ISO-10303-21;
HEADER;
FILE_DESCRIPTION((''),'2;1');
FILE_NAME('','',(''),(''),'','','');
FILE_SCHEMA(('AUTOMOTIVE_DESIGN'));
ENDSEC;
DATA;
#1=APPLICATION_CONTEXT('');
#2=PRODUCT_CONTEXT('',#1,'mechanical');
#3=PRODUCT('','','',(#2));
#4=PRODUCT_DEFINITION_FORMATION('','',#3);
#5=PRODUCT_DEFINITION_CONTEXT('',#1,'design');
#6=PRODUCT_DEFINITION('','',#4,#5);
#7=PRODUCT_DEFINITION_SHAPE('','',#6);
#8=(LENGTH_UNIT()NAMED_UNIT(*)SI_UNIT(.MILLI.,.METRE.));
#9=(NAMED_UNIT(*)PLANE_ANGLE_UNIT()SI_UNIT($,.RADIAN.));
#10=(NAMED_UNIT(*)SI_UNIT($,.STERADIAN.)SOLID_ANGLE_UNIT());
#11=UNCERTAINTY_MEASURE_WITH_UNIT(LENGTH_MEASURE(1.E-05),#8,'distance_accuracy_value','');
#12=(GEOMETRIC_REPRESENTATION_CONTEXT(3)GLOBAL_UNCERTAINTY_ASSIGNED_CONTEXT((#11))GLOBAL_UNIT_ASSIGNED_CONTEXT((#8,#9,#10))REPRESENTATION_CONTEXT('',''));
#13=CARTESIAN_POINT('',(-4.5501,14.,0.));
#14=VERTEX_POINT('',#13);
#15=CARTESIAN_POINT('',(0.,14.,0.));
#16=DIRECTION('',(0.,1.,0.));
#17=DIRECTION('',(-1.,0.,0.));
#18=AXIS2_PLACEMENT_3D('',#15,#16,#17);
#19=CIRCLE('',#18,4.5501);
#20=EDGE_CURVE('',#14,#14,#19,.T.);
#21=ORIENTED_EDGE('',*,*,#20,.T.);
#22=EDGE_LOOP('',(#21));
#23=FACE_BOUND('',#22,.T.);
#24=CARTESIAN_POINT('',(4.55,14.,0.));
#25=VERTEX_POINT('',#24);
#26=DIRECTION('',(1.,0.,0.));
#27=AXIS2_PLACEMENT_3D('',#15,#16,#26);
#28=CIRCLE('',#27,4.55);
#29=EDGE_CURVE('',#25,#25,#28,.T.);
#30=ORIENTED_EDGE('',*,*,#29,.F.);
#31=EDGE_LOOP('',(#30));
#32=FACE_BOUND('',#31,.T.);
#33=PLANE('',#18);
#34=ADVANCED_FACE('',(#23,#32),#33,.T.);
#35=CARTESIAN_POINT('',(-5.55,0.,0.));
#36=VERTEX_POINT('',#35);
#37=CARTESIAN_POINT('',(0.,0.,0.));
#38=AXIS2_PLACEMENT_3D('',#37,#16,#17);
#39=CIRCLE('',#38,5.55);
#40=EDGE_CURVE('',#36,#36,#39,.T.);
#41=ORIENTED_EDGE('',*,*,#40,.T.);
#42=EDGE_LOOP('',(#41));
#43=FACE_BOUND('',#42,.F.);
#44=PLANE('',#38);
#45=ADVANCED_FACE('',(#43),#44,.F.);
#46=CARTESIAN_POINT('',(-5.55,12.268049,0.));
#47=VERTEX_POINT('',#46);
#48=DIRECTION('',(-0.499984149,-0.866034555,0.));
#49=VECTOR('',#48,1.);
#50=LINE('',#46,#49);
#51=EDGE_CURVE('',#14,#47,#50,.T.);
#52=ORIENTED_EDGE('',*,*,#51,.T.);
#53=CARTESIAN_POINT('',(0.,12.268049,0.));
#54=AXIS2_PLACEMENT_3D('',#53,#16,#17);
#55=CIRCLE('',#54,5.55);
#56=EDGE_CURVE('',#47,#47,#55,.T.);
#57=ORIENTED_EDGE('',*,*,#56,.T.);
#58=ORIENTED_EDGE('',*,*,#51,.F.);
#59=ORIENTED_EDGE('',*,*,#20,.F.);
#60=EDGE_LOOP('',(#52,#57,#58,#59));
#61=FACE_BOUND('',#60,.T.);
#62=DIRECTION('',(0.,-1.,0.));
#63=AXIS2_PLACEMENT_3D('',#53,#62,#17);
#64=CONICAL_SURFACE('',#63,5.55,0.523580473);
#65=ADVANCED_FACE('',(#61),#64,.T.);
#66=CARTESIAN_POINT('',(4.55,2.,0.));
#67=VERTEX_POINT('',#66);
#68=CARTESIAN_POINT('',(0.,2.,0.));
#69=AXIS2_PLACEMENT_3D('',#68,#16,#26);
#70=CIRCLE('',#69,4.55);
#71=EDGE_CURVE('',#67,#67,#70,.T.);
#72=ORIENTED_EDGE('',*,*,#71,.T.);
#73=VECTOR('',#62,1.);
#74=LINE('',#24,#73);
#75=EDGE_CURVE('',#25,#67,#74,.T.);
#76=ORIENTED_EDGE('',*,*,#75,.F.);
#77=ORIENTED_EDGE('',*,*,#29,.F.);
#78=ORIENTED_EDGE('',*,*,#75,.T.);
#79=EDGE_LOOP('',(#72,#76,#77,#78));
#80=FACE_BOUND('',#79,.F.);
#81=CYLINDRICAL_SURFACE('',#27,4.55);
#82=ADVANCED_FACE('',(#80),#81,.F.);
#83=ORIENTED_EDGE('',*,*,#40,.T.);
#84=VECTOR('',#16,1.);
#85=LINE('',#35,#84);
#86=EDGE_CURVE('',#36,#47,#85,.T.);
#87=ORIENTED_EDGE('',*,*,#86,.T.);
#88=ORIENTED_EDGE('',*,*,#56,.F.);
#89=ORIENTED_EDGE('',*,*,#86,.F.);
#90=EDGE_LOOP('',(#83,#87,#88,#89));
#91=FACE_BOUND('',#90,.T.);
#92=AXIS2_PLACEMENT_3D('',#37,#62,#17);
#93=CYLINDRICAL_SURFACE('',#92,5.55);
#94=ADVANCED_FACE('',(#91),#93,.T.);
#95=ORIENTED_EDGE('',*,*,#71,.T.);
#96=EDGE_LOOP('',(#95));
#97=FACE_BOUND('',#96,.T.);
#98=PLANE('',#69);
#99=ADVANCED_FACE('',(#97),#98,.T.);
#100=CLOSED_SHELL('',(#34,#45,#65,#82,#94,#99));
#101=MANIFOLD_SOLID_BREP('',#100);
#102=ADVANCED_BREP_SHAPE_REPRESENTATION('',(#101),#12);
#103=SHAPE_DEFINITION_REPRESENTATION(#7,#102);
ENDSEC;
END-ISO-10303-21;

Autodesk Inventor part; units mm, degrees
ref_plane "YZ Plane" through (0, 0, 0) normal (1, 0, 0) x (0, 1, 0)
ref_plane "XZ Plane" through (0, 0, 0) normal (0, 1, 0) x (-1, 0, 0)
ref_plane "XY Plane" through (0, 0, 0) normal (0, 0, 1) x (1, 0, 0)
sketch "Sketch1" plane through (0, 0, 0) normal (0, 1, 0) x (-1, 0, 0)
  circle A0 centre (0, 0) radius 5.55
  dimension "d0" = 11.1
extrude "Extrusion1" add sketch "Sketch1" along normal blind 14
sketch "Sketch2" plane through (0, 14, 0) normal (0, 1, 0) x (1, 0, 0)
  circle A0 centre (0, 0) radius 4.55
  circle A1 centre (0, 0) radius 5.55 projected
  dimension "d3" = 1
extrude "Extrusion2" cut sketch "Sketch2" against normal blind 12 contours A0
chamfer "Chamfer1" distance 1 angle 60 1 edges at (5.55, 14, 0) measured on face at (-5.1629, 14, -0.4427)
properties part number "Plug_3DPrint"
